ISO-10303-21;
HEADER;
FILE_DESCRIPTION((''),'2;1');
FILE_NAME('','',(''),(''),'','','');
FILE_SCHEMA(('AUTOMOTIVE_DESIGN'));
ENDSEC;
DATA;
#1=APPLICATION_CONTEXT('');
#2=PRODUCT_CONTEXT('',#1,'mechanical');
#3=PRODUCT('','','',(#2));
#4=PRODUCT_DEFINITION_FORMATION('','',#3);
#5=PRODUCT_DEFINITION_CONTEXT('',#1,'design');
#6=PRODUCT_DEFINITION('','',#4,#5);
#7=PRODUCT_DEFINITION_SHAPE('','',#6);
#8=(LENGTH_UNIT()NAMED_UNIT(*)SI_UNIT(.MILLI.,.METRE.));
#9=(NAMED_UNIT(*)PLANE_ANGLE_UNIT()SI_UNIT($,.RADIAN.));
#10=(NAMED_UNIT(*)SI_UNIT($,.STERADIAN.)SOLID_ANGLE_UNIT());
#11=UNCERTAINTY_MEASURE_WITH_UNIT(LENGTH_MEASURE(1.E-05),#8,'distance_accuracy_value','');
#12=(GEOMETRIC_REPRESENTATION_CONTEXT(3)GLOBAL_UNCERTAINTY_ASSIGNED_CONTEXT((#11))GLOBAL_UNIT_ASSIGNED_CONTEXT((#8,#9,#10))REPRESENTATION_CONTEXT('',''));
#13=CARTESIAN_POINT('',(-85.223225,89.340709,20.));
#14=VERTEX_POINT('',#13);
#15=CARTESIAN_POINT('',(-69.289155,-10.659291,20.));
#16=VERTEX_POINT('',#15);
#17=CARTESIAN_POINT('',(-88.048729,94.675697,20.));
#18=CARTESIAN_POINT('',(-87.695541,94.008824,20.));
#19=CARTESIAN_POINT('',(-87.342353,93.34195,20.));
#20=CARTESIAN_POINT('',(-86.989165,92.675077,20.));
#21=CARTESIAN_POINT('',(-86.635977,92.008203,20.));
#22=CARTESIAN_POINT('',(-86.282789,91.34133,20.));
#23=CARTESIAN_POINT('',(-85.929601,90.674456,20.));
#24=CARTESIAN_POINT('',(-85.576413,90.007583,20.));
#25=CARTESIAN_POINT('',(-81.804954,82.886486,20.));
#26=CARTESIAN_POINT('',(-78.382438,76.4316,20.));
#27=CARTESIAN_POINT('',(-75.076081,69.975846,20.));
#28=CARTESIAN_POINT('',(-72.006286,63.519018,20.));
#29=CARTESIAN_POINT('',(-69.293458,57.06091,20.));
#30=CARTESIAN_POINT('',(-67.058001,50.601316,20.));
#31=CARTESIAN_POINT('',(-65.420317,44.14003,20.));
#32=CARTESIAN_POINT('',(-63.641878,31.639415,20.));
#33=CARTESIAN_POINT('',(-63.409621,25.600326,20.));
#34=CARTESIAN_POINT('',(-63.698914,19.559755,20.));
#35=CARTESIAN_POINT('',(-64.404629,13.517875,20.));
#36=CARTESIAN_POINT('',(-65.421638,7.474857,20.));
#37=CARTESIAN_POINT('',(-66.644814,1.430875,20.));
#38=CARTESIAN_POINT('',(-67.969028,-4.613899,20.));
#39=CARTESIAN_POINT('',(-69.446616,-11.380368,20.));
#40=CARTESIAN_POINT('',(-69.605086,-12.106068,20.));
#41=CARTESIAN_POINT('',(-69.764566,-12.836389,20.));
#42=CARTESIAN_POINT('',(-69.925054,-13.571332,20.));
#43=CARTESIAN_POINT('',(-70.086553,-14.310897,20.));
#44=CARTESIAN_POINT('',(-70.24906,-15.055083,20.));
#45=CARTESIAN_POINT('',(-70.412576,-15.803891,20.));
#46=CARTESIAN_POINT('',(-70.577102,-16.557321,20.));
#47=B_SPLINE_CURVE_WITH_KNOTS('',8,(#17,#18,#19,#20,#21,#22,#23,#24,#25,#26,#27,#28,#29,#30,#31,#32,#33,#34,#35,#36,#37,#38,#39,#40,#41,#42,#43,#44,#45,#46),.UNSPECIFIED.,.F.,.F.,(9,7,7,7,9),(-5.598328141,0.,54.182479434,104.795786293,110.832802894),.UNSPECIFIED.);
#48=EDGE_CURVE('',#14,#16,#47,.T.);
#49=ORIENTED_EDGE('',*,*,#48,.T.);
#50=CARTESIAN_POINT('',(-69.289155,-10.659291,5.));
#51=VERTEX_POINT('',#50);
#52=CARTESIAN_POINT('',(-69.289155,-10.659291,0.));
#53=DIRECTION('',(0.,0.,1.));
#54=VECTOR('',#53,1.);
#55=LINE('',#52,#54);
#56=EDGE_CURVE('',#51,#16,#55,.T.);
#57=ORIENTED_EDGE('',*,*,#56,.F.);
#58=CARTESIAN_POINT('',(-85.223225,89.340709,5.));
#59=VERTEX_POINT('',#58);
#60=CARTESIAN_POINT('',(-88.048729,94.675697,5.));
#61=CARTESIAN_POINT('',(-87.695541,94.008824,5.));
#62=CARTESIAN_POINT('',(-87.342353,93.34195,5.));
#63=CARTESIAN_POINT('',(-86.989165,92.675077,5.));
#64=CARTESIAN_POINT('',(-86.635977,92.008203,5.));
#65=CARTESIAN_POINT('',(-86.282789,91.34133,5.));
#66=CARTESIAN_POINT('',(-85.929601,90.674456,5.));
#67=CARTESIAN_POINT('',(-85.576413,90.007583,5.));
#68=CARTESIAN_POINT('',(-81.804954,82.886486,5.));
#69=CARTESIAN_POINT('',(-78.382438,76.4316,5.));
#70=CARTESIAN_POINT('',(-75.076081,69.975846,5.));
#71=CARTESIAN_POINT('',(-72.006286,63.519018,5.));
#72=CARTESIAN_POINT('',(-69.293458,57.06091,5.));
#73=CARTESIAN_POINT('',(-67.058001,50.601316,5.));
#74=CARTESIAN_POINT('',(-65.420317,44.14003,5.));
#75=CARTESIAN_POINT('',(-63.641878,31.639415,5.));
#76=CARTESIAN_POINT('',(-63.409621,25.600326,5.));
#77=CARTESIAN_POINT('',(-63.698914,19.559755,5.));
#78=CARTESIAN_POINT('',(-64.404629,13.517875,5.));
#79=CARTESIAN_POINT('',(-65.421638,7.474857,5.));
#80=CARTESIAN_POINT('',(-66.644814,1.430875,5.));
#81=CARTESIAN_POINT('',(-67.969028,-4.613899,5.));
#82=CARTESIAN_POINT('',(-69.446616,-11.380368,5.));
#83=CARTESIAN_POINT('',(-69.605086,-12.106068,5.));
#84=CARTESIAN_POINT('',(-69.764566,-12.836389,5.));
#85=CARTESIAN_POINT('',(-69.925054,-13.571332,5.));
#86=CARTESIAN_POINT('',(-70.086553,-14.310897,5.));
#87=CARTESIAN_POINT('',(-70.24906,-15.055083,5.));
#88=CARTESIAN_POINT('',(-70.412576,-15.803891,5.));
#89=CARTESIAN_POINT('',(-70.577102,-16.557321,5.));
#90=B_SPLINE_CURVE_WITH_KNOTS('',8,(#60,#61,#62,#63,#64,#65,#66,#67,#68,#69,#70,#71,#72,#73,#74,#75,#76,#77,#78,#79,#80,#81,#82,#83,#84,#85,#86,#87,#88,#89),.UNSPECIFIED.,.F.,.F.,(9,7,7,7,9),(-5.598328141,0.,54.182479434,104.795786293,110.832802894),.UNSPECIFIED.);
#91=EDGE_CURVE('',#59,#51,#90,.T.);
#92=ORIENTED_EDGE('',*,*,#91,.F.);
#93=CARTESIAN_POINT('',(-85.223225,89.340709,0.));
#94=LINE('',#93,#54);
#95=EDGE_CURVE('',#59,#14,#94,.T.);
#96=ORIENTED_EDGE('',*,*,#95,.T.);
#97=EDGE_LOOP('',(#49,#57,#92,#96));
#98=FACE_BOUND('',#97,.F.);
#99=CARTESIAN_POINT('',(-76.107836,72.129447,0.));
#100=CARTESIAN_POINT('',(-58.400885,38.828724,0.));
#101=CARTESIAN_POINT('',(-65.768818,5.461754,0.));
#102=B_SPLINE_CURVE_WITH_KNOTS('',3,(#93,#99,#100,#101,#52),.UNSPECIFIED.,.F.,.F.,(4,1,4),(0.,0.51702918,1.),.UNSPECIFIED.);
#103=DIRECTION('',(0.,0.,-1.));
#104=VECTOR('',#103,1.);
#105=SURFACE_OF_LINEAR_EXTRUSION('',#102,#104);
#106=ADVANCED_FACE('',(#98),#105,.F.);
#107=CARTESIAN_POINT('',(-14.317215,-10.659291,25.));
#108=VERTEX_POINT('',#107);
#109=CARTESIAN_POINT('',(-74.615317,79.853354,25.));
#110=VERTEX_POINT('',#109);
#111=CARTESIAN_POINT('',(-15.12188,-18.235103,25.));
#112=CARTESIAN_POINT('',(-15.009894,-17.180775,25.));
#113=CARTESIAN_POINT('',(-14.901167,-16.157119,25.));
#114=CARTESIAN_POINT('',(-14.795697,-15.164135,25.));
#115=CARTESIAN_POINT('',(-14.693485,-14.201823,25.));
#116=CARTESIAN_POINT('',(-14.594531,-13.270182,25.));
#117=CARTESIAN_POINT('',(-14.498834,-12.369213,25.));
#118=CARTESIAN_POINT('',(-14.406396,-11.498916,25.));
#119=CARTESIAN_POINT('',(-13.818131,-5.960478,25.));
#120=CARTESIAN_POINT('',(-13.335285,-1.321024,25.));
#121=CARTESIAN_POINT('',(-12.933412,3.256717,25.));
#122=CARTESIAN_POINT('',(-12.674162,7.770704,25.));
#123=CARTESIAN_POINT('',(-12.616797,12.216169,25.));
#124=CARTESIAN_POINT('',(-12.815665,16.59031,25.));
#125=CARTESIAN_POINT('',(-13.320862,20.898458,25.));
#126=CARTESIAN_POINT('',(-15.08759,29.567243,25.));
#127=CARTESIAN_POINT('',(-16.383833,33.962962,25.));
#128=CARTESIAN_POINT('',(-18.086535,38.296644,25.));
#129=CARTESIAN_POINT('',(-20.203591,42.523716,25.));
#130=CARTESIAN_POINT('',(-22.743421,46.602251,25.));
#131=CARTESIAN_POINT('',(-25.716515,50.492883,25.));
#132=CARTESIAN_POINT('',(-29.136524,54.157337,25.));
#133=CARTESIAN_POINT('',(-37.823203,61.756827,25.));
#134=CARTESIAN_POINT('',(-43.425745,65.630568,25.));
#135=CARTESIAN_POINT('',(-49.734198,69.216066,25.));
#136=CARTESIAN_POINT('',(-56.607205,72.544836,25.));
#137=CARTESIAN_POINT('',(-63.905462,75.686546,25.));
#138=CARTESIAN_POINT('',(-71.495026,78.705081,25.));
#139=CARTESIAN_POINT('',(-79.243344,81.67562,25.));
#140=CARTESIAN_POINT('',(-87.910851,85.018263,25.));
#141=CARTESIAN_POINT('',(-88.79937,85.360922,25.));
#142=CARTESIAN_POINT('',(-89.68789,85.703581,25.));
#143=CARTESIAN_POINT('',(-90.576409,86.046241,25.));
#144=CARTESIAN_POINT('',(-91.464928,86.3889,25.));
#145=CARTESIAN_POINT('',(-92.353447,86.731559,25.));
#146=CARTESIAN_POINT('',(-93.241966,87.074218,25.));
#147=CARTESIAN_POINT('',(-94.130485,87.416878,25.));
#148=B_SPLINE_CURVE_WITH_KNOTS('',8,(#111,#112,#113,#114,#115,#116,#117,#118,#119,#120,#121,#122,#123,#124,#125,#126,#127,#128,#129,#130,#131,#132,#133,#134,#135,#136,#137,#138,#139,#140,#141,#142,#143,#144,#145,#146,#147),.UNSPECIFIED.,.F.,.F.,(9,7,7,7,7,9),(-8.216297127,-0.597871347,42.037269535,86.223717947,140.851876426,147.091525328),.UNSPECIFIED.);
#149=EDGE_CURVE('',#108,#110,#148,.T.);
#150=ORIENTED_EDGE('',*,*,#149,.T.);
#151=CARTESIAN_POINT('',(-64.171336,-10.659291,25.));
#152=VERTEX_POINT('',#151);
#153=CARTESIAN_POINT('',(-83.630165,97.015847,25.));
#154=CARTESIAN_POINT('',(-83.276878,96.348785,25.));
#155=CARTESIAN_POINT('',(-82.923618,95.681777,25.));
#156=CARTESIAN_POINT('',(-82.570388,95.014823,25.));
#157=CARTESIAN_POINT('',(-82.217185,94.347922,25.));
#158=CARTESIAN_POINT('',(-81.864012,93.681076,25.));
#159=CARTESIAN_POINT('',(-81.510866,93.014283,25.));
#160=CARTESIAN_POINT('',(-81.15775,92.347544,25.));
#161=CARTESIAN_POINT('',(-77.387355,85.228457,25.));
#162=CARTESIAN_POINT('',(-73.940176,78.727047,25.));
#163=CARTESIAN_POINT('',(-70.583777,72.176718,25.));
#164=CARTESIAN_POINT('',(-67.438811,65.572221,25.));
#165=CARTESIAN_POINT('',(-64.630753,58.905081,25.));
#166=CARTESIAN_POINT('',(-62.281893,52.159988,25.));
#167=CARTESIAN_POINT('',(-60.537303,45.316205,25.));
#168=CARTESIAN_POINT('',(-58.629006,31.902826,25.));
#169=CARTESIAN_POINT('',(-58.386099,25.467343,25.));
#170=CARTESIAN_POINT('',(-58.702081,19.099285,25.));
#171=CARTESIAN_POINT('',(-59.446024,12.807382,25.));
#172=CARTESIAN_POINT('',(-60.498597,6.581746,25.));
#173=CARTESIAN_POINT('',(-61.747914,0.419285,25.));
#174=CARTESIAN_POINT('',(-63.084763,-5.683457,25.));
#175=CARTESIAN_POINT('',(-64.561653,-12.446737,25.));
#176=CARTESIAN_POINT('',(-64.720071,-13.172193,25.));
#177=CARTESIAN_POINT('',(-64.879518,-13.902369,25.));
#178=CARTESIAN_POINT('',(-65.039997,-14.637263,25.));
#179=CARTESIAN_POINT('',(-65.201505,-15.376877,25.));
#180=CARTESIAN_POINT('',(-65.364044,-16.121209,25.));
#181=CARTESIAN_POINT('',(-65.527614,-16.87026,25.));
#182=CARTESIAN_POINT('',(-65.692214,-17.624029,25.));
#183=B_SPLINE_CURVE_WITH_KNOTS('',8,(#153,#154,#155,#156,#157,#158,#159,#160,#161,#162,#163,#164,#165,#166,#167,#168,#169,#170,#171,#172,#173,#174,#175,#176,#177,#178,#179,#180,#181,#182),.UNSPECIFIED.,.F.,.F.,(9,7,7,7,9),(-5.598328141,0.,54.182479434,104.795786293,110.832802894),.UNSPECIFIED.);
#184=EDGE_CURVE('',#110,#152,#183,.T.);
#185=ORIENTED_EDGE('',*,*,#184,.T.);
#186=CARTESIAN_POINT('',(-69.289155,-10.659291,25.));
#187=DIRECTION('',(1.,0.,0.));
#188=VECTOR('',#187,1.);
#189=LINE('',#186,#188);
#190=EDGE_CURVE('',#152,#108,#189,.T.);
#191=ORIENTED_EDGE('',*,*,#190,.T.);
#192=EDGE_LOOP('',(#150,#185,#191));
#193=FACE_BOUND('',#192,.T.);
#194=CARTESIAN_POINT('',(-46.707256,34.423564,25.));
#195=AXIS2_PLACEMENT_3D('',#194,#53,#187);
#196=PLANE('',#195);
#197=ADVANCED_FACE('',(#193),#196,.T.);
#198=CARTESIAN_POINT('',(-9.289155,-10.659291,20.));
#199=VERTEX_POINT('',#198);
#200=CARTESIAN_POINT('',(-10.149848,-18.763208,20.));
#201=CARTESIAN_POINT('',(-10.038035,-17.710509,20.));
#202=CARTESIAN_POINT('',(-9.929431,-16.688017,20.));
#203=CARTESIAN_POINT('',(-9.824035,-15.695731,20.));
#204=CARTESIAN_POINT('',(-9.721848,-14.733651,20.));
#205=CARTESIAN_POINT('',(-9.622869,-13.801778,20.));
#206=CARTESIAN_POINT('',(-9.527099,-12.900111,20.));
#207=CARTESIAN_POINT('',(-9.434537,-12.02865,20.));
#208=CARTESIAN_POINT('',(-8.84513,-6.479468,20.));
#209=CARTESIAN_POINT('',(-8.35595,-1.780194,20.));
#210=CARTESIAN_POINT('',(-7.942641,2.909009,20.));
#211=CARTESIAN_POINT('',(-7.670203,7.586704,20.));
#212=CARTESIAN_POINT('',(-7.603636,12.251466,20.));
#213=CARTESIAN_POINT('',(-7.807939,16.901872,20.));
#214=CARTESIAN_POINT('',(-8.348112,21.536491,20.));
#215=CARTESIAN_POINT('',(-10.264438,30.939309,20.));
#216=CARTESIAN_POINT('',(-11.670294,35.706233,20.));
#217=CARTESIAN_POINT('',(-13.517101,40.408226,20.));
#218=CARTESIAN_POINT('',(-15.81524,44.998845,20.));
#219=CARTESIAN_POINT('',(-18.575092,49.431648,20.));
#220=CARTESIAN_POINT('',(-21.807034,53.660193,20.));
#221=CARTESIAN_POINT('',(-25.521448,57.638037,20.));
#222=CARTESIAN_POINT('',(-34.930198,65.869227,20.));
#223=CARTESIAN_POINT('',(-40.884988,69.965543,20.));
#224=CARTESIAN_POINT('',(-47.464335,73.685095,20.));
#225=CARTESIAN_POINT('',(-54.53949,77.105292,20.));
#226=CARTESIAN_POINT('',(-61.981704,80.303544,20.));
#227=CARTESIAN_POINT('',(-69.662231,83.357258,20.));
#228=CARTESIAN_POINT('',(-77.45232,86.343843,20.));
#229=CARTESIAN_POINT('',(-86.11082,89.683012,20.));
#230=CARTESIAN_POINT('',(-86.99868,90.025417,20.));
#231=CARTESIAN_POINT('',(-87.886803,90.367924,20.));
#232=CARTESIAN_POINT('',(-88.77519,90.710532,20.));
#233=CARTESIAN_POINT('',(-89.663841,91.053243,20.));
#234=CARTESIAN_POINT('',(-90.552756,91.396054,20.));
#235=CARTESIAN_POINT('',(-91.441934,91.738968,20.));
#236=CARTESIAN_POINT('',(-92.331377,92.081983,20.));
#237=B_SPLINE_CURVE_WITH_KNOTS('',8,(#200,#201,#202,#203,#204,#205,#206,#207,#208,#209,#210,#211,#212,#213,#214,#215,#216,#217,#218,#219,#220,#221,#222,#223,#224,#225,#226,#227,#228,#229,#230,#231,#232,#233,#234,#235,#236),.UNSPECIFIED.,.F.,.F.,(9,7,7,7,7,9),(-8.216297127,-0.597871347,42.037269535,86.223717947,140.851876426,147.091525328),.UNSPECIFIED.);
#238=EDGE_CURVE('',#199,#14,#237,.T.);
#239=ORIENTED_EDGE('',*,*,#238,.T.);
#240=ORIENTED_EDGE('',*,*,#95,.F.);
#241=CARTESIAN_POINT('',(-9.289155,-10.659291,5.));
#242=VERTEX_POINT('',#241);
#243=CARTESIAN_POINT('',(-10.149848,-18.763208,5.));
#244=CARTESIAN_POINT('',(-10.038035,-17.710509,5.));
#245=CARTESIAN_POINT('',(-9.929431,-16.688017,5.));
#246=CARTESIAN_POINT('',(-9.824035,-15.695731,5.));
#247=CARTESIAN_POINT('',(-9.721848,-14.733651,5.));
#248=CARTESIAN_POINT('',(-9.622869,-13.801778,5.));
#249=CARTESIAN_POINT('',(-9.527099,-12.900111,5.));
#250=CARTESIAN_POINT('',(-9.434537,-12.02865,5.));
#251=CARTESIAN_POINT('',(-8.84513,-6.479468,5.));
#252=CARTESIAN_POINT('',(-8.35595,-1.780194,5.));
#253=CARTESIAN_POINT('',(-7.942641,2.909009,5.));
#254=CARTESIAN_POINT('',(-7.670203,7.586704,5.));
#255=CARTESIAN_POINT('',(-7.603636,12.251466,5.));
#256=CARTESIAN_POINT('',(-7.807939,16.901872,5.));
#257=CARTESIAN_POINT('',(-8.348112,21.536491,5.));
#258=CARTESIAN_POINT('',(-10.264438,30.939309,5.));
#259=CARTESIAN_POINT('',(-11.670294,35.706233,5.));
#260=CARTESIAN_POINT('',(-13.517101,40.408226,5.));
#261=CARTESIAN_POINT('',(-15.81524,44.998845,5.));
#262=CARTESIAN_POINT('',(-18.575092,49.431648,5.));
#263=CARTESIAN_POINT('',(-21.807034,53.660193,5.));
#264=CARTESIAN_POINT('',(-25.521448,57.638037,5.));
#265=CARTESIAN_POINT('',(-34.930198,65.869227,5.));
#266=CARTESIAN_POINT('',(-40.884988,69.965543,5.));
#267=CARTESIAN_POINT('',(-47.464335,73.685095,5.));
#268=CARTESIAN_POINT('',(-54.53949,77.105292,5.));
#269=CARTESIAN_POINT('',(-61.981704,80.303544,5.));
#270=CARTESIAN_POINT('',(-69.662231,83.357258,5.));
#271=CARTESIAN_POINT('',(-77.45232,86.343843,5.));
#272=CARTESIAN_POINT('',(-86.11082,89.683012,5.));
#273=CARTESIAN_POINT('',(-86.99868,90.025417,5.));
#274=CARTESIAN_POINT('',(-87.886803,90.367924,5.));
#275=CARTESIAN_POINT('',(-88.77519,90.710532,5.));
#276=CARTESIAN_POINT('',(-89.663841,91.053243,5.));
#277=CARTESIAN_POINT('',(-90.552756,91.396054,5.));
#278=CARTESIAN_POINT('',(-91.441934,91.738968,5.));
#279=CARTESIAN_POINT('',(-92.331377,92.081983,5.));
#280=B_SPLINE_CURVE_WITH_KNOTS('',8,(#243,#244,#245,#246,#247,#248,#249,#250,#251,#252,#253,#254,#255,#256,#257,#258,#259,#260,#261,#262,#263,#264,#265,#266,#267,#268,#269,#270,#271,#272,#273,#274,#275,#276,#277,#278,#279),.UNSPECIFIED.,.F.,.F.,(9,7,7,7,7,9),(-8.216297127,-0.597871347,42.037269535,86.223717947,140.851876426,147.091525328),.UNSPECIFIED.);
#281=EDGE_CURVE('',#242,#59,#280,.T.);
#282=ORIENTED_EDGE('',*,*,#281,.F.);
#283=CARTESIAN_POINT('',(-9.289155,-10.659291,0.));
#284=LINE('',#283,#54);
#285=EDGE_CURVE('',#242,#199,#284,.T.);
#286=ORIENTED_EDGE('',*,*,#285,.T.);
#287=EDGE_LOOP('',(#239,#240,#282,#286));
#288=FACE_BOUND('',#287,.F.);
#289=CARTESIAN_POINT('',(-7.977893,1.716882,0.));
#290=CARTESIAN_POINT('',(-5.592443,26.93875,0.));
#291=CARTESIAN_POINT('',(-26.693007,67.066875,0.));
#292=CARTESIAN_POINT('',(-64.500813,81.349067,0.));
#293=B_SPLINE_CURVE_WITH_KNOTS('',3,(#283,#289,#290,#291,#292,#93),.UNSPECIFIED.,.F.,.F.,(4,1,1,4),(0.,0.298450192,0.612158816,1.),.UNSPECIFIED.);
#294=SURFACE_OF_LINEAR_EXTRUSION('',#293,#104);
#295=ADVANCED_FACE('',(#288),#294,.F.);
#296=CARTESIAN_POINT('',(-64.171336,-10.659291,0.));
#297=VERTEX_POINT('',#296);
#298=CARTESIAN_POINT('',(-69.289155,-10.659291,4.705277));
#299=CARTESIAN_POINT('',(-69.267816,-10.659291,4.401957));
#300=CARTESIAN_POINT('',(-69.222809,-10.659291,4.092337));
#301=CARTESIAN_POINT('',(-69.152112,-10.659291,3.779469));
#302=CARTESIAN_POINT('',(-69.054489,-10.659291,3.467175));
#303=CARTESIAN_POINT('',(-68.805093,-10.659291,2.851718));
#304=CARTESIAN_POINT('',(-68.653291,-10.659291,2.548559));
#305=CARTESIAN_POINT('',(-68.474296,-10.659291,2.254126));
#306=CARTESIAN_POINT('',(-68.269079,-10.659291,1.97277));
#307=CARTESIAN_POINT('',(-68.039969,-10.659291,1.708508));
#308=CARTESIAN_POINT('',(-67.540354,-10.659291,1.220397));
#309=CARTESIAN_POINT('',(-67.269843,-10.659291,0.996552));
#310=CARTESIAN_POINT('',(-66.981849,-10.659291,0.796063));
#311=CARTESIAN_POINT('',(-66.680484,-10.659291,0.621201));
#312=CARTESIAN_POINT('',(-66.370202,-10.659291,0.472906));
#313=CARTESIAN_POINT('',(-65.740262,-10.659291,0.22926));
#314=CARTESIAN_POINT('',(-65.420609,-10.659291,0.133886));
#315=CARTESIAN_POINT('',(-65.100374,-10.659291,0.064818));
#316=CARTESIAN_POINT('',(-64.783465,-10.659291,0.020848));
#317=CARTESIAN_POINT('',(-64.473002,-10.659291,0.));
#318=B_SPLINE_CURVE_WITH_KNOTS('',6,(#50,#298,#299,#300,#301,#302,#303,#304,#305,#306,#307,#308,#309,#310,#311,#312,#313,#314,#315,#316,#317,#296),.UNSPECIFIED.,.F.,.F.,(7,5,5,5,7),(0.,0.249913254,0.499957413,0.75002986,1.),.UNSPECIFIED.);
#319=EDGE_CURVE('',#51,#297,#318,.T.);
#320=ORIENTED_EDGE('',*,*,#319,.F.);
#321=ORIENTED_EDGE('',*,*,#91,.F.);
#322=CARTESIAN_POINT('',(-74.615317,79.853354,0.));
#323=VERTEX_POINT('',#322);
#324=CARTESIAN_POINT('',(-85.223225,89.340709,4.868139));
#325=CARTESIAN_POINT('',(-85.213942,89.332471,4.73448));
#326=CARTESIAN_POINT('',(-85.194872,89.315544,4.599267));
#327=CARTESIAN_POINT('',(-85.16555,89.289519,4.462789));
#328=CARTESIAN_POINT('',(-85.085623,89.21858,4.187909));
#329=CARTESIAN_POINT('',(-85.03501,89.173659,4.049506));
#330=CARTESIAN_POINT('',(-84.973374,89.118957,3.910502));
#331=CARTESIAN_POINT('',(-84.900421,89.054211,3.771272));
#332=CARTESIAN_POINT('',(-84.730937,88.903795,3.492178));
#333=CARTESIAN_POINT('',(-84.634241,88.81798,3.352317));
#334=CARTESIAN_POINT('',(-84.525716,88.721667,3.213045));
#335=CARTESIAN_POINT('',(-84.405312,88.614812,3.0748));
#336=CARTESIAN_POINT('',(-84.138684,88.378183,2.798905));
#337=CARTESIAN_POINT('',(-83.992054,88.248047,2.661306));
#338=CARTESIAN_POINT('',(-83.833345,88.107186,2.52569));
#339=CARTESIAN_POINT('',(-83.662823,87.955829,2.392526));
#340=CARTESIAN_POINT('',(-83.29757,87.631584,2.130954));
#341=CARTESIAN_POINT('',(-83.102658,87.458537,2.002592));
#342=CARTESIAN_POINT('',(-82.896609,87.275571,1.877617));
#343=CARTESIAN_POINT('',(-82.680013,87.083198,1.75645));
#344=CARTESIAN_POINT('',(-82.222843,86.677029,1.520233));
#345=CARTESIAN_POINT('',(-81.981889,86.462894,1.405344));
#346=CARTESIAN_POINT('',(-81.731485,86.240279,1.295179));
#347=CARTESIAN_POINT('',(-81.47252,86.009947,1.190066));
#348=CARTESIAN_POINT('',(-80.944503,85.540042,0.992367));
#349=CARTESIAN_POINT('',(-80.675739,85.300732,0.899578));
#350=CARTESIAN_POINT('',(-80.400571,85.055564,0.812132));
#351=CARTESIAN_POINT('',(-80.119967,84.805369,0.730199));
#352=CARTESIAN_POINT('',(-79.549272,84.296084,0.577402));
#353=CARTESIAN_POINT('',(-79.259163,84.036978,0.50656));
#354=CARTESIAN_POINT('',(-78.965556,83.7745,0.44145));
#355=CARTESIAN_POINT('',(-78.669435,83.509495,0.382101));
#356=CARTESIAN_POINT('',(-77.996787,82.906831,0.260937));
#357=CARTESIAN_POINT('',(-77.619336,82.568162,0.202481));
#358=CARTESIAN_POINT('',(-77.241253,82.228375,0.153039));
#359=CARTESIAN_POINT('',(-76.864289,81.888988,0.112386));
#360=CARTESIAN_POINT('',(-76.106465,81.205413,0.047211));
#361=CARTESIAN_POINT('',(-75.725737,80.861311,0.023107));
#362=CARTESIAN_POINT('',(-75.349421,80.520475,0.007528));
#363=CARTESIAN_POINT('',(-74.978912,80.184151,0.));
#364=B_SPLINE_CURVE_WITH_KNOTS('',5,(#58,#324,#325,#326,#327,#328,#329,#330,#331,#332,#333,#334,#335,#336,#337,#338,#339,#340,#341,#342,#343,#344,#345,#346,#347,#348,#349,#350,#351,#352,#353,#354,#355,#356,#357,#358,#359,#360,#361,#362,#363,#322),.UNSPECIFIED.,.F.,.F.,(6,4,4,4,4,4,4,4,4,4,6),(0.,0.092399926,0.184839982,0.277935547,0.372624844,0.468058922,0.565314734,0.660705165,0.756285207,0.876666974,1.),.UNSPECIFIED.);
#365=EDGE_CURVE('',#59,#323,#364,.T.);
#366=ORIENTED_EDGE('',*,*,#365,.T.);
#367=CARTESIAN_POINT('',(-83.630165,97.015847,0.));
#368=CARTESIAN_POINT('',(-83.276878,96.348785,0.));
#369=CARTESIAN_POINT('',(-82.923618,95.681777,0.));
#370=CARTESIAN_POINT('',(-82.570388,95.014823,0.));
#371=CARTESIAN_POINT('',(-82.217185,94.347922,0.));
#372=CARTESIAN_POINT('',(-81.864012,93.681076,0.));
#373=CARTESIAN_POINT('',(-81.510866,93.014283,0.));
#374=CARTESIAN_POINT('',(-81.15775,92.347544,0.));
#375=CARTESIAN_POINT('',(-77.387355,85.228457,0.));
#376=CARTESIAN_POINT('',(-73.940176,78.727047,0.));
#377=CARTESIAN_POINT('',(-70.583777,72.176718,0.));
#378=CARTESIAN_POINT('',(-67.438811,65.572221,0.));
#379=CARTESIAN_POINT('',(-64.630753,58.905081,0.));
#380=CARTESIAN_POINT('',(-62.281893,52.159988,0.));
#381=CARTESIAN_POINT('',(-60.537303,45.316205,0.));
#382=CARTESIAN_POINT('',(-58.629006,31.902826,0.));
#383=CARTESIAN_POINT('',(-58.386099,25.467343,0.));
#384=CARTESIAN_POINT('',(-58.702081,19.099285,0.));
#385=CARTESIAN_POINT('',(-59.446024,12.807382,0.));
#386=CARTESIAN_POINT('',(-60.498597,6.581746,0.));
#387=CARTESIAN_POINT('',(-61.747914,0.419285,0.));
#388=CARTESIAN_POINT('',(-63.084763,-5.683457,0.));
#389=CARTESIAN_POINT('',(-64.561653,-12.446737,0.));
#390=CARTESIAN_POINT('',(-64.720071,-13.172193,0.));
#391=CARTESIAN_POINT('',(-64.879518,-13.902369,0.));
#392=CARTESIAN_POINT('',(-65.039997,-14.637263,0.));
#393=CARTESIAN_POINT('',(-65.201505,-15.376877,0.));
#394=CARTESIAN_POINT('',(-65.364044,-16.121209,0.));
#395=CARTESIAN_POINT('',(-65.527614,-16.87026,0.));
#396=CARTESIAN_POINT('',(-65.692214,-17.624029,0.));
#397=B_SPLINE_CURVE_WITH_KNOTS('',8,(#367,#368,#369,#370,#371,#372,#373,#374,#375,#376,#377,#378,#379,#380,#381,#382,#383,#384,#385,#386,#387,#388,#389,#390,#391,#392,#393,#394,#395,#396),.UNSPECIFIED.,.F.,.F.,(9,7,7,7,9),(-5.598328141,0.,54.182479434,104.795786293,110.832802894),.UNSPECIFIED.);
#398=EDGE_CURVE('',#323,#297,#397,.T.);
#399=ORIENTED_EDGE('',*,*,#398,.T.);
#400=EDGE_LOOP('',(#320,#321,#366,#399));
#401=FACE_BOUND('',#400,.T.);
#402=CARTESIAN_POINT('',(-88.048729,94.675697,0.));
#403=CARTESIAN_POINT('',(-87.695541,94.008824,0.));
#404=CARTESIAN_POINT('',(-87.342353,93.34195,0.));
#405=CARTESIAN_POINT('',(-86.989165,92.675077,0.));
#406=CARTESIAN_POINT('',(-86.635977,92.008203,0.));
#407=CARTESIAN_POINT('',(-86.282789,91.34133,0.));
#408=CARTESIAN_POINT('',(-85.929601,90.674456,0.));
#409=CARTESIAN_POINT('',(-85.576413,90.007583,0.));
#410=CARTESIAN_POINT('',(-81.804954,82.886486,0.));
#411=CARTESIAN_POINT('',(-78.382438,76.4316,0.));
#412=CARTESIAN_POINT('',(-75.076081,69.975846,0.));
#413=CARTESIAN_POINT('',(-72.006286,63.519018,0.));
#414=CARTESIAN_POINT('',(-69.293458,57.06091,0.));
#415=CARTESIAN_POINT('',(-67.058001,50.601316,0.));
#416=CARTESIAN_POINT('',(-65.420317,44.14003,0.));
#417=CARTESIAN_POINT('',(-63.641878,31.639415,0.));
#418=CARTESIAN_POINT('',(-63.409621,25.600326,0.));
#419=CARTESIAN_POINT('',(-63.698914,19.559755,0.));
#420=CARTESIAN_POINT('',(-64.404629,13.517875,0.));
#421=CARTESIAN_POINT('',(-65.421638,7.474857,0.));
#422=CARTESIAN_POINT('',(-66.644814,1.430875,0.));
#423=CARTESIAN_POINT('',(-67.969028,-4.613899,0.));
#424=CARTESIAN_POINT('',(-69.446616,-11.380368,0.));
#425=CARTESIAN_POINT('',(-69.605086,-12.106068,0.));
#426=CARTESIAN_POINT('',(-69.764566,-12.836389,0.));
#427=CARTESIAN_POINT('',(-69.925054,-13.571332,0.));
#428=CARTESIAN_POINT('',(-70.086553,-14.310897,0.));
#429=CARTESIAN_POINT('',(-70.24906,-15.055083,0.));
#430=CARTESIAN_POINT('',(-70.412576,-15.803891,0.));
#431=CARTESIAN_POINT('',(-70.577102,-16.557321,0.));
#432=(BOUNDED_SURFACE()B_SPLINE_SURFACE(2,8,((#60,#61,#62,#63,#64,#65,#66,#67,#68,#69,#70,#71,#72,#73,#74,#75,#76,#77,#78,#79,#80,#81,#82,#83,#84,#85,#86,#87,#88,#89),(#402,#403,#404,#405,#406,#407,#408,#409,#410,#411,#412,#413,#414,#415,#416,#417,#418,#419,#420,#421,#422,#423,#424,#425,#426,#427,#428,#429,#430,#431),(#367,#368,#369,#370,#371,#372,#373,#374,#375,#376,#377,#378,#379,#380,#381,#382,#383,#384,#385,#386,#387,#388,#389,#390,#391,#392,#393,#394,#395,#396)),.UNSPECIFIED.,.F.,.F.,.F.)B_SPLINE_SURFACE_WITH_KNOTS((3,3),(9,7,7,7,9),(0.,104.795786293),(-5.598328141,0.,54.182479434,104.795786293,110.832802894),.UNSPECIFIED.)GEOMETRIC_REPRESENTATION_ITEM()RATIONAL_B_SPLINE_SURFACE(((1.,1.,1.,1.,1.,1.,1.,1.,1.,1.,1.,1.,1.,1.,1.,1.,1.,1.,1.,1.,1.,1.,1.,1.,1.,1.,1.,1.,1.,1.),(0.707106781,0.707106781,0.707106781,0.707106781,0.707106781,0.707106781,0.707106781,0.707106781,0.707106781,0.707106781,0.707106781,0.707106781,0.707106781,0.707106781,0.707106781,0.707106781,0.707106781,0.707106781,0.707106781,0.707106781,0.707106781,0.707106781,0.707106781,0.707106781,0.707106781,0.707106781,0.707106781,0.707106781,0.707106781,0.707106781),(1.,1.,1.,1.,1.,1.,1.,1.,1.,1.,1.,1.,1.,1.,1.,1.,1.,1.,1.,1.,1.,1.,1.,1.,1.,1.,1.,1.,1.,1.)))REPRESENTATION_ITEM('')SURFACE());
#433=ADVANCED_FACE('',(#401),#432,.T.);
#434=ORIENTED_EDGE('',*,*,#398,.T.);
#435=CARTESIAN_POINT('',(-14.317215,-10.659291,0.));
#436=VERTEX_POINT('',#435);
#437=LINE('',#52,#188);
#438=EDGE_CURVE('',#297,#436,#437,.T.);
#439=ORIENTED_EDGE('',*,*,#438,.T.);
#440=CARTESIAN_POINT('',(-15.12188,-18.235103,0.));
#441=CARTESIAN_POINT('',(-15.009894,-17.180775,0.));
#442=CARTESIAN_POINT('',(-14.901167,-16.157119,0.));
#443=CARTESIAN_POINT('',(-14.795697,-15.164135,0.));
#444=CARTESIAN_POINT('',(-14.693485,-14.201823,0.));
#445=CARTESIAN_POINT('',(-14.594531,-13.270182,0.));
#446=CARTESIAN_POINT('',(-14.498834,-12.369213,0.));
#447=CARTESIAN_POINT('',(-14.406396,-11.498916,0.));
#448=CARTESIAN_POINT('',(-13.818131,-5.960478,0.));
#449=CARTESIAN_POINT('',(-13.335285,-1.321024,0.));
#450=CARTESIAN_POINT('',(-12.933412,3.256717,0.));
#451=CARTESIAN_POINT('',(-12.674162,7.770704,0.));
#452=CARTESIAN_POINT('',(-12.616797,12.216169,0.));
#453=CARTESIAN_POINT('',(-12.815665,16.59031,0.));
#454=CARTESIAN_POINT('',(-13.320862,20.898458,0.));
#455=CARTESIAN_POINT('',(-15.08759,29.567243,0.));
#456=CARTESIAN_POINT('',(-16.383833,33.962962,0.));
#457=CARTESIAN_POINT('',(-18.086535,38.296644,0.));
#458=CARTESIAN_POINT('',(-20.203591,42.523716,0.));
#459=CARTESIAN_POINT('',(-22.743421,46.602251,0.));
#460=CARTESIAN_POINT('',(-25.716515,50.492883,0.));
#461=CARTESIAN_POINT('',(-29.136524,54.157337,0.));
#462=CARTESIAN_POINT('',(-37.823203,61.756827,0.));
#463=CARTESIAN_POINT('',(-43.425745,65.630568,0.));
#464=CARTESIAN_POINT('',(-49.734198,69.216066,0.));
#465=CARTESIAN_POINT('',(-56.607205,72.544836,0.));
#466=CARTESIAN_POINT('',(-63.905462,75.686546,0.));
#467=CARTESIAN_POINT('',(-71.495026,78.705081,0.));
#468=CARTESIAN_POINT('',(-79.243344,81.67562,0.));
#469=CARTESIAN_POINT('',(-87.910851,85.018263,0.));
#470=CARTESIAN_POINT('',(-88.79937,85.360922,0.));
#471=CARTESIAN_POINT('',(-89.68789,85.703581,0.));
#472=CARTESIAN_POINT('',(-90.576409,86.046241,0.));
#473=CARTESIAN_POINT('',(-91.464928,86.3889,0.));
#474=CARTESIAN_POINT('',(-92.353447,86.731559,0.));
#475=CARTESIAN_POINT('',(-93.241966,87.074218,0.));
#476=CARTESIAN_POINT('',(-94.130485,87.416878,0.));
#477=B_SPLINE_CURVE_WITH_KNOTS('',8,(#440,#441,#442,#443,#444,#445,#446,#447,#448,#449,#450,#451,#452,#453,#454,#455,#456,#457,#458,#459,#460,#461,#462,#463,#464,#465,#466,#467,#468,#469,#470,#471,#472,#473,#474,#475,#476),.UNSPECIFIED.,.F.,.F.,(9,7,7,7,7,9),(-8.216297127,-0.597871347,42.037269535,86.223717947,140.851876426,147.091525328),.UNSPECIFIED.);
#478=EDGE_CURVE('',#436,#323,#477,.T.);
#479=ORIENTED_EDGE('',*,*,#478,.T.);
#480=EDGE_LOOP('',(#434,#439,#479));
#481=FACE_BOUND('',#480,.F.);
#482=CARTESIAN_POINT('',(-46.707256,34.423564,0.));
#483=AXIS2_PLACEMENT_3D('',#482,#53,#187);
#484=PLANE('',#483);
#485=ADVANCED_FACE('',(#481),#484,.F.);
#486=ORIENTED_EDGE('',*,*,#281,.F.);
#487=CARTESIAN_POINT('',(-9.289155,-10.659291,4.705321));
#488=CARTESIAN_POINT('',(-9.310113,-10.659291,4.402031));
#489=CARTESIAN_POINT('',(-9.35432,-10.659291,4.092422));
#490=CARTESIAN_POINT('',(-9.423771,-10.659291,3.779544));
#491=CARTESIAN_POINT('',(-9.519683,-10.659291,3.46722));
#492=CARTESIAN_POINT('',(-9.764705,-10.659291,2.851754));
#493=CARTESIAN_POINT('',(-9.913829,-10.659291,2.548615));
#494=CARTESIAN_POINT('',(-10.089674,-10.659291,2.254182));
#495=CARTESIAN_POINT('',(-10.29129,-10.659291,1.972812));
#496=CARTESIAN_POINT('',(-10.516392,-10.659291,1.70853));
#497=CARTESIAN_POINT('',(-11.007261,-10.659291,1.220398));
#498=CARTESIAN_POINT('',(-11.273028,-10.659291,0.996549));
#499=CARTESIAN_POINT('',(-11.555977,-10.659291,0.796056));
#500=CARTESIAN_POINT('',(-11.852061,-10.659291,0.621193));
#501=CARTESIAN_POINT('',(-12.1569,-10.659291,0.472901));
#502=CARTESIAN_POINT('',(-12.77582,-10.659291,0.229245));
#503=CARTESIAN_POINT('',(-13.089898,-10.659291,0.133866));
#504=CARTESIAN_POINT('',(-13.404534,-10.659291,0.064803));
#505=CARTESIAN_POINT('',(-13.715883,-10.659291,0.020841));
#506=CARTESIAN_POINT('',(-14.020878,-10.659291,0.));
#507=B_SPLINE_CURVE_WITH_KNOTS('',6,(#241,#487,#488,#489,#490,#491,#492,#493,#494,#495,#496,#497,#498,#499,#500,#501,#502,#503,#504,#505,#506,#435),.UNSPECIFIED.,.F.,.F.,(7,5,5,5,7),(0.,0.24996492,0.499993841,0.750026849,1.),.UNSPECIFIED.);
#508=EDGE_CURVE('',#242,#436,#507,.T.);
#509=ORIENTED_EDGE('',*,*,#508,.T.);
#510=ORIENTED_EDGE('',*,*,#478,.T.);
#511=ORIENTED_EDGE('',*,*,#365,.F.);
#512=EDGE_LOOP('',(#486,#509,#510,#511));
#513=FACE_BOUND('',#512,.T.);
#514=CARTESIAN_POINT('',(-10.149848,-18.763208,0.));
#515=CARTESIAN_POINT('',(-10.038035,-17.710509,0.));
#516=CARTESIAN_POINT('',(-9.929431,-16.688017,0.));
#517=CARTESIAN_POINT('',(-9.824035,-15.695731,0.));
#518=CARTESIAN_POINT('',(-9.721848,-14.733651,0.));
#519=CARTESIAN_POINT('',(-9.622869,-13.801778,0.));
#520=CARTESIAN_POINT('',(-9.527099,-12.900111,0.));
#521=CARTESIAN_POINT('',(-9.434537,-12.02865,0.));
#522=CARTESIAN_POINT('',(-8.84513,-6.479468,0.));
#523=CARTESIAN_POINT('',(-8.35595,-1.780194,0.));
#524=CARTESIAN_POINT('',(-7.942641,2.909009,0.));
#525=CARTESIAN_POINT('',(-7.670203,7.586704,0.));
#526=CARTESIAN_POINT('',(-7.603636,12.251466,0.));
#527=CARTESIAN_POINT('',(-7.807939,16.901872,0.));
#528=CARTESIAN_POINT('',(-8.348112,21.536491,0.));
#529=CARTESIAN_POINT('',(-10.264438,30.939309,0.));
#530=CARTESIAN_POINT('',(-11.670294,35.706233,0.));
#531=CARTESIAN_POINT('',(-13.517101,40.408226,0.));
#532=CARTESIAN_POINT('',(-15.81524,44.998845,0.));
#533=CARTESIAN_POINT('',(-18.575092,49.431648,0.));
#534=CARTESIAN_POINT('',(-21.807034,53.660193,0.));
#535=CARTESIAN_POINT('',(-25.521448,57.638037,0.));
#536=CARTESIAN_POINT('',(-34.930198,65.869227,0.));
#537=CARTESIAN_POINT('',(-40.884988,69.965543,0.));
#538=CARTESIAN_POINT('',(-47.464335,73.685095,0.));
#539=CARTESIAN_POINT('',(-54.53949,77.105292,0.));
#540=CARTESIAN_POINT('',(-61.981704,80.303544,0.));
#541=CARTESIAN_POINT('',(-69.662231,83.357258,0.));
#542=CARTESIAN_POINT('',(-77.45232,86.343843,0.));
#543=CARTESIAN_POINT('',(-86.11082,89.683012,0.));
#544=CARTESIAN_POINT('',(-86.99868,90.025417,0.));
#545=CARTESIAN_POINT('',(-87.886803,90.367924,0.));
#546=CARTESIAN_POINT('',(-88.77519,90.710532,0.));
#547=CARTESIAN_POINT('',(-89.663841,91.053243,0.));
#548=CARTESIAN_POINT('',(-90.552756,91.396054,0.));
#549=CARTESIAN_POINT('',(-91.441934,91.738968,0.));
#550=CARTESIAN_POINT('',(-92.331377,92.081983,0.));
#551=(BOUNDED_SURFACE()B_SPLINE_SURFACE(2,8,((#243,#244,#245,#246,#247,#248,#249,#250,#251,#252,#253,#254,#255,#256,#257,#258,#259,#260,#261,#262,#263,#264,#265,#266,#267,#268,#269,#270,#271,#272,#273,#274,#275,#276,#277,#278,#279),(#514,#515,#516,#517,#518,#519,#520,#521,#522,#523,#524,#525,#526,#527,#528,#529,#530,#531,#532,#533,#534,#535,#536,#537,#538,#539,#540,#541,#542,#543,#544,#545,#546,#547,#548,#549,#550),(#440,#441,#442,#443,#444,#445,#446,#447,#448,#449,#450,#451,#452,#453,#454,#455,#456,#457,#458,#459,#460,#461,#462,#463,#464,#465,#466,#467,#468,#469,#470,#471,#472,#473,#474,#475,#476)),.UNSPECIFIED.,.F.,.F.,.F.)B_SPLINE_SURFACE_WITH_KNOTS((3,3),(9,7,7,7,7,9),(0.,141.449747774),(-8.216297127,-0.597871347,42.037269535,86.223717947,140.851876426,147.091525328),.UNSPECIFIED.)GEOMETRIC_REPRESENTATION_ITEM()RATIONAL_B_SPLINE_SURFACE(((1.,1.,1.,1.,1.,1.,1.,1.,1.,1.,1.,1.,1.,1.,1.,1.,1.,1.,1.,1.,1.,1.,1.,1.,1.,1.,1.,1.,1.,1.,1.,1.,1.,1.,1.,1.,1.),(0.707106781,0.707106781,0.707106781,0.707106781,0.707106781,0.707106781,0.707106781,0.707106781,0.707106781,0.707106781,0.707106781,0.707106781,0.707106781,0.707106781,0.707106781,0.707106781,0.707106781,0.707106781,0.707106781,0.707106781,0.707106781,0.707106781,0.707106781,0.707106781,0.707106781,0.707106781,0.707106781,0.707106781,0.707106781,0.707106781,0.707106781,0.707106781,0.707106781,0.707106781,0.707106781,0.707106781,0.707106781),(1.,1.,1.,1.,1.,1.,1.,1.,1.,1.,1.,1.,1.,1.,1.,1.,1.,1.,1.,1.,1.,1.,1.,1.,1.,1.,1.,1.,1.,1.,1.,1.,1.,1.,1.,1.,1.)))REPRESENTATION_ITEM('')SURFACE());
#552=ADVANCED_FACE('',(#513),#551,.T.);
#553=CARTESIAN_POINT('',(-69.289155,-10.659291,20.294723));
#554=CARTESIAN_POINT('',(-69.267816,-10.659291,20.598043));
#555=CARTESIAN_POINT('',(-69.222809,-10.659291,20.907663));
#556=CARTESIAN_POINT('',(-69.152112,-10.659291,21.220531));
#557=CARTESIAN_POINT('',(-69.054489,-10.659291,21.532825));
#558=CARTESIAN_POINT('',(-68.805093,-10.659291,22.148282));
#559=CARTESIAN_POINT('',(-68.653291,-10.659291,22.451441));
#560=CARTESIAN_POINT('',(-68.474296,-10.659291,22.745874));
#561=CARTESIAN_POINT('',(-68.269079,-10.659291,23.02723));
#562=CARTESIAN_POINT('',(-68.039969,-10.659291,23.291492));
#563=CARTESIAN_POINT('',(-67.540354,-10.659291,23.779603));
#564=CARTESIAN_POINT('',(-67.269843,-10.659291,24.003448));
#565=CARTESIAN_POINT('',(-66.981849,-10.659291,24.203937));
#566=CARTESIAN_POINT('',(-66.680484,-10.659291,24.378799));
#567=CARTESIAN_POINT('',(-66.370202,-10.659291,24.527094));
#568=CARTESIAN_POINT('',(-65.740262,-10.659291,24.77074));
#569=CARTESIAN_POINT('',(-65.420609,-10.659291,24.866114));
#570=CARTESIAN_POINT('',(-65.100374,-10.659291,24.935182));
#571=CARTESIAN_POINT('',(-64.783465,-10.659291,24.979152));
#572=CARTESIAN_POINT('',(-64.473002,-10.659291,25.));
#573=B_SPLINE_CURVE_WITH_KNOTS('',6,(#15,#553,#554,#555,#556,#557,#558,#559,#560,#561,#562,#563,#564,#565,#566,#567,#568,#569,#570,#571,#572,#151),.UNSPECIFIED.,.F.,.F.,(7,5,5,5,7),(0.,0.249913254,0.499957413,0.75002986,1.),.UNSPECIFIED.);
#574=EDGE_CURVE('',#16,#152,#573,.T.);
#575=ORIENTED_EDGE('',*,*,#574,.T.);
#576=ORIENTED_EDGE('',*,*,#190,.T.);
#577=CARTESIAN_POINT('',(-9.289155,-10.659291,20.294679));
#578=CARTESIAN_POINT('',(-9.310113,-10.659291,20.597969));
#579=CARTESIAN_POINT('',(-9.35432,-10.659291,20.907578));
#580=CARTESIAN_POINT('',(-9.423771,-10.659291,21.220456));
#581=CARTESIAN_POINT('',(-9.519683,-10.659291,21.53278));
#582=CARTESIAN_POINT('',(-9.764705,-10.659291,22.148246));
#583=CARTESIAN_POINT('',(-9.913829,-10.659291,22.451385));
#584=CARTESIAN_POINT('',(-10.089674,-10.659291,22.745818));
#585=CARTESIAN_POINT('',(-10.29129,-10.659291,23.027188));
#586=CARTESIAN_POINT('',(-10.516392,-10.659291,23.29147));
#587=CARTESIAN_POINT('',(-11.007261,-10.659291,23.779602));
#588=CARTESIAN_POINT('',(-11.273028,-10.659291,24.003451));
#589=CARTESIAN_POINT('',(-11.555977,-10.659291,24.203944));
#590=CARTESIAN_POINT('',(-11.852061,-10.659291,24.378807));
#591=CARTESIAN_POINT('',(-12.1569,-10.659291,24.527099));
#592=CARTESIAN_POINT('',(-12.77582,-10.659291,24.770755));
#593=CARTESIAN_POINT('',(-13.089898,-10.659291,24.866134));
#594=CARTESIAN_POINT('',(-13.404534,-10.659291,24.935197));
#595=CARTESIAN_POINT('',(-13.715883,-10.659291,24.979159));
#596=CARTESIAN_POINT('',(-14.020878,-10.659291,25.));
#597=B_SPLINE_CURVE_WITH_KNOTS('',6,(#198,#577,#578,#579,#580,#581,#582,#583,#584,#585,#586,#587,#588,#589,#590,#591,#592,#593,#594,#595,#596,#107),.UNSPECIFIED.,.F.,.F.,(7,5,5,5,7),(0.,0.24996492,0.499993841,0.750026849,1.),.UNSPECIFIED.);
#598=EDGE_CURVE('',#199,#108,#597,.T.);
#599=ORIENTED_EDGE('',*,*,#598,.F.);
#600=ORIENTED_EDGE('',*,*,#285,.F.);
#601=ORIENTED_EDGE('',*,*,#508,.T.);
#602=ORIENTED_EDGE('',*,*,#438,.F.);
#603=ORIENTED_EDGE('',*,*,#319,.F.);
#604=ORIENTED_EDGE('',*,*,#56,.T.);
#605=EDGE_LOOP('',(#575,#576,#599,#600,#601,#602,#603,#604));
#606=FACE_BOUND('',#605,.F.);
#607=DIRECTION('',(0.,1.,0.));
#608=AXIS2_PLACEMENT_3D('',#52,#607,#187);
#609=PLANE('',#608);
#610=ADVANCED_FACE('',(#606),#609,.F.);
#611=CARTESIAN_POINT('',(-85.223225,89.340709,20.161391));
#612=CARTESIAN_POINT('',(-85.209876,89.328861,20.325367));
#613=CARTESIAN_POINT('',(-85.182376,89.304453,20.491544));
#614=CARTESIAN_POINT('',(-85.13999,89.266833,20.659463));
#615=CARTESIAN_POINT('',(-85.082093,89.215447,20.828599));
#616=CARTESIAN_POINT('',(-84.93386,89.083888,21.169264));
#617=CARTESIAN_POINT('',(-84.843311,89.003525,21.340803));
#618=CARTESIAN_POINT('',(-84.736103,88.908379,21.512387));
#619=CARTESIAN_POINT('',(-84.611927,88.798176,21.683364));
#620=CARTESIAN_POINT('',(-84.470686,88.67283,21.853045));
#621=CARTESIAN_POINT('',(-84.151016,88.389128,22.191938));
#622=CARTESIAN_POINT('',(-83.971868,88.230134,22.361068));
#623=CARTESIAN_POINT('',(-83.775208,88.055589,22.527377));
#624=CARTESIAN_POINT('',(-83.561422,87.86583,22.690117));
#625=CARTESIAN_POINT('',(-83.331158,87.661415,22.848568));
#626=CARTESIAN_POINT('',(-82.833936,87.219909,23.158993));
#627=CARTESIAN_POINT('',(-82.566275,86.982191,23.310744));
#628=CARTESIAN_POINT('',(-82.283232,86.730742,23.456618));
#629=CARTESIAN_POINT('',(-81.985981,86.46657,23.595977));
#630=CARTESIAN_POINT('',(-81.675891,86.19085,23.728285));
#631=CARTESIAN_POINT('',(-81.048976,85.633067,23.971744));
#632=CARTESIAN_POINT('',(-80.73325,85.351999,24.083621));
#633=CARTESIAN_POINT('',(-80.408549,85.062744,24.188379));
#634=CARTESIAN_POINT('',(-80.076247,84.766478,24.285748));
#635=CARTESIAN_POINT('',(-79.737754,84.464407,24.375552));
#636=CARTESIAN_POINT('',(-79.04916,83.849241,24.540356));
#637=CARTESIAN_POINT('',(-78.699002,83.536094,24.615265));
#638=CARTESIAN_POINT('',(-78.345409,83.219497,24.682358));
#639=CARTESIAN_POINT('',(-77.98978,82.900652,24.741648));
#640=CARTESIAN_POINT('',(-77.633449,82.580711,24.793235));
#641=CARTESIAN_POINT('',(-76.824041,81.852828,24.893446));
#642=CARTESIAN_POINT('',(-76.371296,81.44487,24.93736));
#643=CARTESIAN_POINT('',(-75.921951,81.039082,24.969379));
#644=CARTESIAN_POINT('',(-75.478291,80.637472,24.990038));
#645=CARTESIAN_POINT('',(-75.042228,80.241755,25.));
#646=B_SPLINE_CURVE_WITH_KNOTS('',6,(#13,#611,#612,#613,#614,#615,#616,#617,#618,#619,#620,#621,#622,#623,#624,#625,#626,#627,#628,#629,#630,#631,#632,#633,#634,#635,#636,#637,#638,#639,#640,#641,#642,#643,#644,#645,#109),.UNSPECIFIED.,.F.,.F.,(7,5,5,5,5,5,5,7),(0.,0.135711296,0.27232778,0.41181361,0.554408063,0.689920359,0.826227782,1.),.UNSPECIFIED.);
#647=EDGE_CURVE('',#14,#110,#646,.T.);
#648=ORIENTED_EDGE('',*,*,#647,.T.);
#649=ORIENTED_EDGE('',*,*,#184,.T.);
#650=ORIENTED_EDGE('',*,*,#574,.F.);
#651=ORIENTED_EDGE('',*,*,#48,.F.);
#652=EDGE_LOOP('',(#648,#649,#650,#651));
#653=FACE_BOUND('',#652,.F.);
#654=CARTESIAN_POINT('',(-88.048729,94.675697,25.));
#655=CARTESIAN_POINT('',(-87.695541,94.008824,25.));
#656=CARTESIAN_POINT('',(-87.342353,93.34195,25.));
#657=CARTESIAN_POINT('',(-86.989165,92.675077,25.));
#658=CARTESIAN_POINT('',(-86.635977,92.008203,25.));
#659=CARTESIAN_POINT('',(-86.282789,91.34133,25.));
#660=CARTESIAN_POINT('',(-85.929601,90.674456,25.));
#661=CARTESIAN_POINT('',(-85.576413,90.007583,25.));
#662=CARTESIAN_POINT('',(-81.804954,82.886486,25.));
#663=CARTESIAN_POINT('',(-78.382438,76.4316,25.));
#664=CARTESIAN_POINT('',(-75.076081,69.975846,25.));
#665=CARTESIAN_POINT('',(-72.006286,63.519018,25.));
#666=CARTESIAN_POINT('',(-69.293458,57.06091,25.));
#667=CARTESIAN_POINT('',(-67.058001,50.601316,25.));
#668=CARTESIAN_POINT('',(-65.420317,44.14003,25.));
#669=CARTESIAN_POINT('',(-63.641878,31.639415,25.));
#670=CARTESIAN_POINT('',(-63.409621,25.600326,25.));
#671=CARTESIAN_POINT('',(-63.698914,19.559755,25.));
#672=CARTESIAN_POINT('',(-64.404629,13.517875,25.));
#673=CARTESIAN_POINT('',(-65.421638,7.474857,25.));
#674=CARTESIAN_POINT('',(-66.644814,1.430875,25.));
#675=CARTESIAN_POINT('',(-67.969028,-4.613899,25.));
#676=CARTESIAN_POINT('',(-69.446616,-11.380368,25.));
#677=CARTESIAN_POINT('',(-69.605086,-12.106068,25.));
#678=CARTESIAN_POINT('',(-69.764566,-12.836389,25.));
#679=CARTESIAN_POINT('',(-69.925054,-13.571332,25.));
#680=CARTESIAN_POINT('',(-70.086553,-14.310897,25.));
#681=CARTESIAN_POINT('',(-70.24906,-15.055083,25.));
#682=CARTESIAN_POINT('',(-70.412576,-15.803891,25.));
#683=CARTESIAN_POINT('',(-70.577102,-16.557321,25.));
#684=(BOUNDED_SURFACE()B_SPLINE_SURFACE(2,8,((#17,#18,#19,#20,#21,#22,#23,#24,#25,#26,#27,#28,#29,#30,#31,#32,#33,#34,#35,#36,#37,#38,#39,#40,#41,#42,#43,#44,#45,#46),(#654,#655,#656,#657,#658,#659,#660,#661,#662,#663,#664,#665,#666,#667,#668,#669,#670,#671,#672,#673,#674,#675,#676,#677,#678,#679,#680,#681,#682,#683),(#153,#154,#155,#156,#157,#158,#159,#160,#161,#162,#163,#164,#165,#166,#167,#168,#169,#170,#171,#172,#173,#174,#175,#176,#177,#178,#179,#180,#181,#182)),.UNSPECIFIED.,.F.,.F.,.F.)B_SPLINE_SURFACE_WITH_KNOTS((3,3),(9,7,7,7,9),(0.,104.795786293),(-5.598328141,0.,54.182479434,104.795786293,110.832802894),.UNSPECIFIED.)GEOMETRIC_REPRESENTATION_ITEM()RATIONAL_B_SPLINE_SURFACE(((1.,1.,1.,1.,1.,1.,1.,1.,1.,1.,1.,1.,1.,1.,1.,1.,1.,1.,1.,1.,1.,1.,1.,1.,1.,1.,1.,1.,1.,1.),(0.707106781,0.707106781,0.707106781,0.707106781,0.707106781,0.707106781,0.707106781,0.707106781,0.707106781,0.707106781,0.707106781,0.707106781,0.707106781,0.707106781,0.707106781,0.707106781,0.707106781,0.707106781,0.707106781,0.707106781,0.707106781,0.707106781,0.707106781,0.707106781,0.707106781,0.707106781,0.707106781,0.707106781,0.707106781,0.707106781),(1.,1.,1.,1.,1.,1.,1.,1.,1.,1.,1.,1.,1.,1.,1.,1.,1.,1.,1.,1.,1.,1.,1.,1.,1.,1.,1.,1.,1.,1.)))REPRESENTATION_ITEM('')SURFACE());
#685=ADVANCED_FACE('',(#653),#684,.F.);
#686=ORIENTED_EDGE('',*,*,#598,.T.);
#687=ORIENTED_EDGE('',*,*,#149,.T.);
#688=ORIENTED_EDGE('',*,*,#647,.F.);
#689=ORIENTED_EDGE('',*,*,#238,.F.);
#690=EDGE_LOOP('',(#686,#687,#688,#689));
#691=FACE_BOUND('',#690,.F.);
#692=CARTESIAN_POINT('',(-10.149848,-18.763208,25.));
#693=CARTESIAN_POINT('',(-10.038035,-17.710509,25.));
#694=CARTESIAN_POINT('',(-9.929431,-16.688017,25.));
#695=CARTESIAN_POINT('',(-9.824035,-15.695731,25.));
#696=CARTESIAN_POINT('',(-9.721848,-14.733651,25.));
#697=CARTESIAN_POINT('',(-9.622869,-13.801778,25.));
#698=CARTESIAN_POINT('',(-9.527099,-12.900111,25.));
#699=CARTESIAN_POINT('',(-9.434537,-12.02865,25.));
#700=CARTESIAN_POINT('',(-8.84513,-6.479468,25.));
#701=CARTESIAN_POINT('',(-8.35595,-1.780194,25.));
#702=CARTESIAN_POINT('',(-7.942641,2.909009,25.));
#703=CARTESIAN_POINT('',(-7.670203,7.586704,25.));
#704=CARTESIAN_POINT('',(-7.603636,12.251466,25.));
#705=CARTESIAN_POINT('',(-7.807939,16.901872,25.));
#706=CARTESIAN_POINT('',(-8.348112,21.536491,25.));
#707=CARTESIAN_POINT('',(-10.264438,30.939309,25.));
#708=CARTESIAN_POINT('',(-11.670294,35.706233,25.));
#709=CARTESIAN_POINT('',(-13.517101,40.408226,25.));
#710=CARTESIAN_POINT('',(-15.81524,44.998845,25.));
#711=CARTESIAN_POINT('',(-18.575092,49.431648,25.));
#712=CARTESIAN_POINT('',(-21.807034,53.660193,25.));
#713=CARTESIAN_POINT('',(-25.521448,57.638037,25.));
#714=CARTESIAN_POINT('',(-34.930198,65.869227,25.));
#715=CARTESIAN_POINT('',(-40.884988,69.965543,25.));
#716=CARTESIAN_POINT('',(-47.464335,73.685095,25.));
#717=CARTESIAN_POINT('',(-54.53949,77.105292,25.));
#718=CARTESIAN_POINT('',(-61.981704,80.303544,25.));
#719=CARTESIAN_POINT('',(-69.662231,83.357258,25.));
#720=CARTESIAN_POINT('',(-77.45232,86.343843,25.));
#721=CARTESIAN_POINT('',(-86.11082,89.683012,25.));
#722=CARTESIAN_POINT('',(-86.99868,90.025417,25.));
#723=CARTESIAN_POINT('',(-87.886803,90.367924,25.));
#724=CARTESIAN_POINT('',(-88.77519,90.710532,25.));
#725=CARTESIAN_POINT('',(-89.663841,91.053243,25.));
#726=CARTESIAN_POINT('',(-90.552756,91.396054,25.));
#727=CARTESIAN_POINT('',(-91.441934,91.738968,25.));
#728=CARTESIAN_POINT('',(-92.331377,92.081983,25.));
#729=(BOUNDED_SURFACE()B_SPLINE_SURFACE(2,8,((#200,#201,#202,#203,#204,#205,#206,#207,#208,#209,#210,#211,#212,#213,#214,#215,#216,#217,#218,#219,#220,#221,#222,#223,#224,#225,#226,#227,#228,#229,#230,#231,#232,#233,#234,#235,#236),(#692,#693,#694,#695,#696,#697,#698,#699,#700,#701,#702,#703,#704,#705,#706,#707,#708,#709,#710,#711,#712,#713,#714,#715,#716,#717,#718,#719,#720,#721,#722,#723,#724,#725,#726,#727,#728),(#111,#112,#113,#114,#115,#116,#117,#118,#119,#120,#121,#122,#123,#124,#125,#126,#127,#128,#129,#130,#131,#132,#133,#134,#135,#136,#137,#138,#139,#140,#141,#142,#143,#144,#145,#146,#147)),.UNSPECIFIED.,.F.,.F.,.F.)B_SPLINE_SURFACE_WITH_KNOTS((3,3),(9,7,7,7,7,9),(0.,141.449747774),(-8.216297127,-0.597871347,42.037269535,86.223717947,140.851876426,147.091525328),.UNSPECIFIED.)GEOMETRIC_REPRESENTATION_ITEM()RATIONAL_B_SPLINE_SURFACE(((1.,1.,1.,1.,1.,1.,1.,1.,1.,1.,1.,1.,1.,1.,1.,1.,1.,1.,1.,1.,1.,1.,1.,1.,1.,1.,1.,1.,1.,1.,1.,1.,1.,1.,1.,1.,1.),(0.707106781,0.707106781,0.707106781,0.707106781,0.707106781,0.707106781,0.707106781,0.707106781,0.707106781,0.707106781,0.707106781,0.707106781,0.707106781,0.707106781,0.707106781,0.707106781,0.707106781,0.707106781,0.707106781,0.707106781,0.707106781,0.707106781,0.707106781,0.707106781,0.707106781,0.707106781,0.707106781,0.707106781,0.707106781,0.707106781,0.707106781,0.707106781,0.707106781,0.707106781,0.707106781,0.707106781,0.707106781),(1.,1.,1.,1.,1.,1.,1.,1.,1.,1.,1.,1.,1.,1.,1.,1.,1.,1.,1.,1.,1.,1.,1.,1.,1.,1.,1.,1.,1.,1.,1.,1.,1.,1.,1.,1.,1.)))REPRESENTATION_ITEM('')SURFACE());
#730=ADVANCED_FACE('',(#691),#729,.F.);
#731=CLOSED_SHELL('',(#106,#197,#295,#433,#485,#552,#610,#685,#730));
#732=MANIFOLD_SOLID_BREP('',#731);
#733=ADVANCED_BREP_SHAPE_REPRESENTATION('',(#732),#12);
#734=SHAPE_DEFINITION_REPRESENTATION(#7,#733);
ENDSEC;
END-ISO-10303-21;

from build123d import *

# Parameters (mm, degrees)
F1_DEPTH = 25
F2_R     = 5


with BuildPart() as f1:
    # F0 (on Top) → F1 (new body)
    with BuildSketch(Plane.XY):
        with BuildLine():
            add(Edge.make_bspline(
                [(-85.2232245209, 89.3407093361), (-76.1078356744, 72.1294474685), (-58.4008853366, 38.8287239467), (-65.7688178685, 5.4617543863), (-69.2891548347, -10.6592906639)],
                knots=[0, 0, 0, 0, 0.5170291798, 1, 1, 1, 1], degree=3))
            Line((-69.2891548347, -10.6592906639), (-9.2891548347, -10.6592906639))
            add(Edge.make_bspline(
                [(-9.2891548347, -10.6592906639), (-7.9778926841, 1.7168816499), (-5.5924427944, 26.9387503571), (-26.6930073641, 67.0668752818), (-64.5008126009, 81.3490670792), (-85.2232245209, 89.3407093361)],
                knots=[0, 0, 0, 0, 0.2984501918, 0.6121588163, 1, 1, 1, 1], degree=3))
        make_face()
    extrude(amount=F1_DEPTH)

    # F2
    f2_edges = [f1.edges().sort_by_distance(p)[0] for p in [
        (-24.084817, 55.731456, 0),
        (-24.084817, 55.731456, 25),
        (-65.088817, 41.176691, 25),
        (-65.088817, 41.176691, 0),
    ]]
    fillet(f2_edges, radius=F2_R)


solid = f1.part
